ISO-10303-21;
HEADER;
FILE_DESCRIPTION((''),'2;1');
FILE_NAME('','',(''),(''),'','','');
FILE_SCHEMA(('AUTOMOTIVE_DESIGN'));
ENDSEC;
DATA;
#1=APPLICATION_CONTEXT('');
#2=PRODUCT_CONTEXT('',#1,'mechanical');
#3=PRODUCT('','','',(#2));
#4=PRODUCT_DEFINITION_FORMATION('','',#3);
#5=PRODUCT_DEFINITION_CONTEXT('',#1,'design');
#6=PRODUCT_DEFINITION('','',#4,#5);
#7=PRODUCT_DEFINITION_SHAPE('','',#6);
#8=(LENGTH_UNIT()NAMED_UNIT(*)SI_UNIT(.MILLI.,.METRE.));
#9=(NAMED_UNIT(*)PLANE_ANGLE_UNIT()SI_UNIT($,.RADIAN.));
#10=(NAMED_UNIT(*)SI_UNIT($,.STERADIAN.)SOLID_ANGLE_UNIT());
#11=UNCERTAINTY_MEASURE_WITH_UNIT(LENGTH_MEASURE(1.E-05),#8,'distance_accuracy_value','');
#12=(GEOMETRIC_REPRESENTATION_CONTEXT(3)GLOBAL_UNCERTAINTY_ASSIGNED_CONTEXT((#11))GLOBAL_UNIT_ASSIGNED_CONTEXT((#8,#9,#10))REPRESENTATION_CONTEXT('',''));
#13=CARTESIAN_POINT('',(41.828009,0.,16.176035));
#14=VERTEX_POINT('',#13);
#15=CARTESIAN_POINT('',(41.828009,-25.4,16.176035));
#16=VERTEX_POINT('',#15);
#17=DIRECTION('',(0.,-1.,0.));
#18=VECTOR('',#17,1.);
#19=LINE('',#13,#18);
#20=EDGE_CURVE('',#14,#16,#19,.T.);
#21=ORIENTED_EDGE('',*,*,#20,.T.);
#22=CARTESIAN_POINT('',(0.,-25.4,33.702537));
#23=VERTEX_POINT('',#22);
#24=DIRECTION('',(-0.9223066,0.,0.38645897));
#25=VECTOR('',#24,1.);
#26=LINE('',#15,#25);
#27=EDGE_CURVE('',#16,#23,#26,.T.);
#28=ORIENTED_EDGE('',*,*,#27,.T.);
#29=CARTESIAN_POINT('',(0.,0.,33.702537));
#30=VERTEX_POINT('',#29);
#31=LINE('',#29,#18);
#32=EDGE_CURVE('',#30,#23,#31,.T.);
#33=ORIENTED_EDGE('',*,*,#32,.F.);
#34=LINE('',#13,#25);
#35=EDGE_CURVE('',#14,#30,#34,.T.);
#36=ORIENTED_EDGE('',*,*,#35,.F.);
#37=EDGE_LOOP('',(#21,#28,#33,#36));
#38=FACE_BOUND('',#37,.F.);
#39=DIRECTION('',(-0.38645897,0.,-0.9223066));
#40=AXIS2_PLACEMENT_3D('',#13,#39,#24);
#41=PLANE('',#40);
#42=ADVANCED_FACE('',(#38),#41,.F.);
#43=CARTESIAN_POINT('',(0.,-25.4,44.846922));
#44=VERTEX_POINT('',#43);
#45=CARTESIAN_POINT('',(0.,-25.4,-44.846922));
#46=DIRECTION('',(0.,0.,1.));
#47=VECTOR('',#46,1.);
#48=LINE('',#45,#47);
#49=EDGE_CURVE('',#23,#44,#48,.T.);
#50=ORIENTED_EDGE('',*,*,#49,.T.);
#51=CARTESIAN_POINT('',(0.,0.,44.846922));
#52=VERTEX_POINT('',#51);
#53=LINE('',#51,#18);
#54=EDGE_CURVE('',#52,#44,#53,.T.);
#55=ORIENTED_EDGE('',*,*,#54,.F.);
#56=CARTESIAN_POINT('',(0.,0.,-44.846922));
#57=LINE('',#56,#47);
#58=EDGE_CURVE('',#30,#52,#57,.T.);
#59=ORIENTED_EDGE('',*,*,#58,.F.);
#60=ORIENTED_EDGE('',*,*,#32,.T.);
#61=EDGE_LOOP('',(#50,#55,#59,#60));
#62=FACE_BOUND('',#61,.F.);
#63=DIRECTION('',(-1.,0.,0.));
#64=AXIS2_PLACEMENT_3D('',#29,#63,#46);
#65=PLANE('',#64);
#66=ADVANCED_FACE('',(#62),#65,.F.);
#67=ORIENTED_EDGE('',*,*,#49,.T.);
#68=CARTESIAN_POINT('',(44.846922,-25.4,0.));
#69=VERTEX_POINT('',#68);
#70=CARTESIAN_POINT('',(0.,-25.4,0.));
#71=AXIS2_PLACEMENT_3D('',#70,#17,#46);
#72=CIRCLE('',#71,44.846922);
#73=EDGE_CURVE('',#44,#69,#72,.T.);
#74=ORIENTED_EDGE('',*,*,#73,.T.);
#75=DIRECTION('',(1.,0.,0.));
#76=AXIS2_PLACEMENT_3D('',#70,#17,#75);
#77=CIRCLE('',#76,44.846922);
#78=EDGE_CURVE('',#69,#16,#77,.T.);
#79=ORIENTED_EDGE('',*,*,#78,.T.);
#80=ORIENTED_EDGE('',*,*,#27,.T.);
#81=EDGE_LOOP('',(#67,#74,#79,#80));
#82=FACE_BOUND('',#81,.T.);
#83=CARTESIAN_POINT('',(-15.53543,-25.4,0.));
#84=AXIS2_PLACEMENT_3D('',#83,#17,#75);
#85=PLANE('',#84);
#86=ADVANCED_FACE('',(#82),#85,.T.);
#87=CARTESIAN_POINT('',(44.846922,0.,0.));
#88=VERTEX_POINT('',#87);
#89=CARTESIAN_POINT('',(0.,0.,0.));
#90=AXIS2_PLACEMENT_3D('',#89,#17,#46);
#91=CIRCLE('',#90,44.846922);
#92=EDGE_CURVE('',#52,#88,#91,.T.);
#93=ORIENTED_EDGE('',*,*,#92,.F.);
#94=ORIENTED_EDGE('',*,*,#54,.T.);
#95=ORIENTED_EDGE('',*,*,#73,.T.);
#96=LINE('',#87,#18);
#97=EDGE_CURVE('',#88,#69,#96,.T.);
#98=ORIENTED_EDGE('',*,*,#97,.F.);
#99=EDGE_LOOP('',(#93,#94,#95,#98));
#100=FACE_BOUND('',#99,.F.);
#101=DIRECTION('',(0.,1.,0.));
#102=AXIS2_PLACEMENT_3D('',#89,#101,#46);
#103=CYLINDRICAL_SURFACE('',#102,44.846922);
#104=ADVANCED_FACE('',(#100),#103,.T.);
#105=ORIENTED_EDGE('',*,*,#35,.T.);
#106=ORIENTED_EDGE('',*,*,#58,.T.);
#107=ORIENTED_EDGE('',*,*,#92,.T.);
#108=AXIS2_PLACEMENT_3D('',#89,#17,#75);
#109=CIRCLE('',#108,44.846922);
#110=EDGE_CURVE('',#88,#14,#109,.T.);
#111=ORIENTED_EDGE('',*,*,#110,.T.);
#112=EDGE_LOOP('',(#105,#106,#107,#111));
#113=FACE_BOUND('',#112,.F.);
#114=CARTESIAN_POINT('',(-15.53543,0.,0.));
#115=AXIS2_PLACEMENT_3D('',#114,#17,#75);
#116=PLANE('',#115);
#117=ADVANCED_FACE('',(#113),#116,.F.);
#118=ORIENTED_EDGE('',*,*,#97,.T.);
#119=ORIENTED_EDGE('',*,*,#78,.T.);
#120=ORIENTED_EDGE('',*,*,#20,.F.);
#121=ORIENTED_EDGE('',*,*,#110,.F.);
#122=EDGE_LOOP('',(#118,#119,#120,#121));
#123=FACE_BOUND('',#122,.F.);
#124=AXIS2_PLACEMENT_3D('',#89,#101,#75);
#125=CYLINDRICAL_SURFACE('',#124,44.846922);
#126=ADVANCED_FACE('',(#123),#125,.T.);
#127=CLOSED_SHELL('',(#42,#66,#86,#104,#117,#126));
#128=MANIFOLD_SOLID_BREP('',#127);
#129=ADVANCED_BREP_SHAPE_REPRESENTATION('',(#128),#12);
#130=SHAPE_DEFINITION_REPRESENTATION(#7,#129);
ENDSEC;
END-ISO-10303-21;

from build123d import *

# Parameters (mm, degrees)
F1_DEPTH = 25.4


# Not quite as in the source:
# - the program builds the solid bodies; features that only make, move or delete a surface that nothing else refers to are left out


with BuildPart() as f1:
    # F0 (on Front) → F1 (new body)
    with BuildSketch(Plane.XZ):
        with BuildLine():
            ThreePointArc((0, 44.8469221637), (-44.8469221637, 0), (0, -44.8469221637))
            Line((0, -44.8469221637), (0, 33.7025374174))
            Line((0, 33.7025374174), (0, 44.8469221637))
        make_face()
        with BuildLine():
            ThreePointArc((0, -44.8469221637), (31.7115627773, -31.7115627773), (44.8469221637, 0))
            ThreePointArc((44.8469221637, 0), (44.0857340296, 8.2276656851), (41.8280089648, 16.176034545))
            Line((41.8280089648, 16.176034545), (0, 33.7025374174))
            Line((0, 33.7025374174), (0, -44.8469221637))
        make_face()
    extrude(amount=F1_DEPTH)


solid = f1.part
